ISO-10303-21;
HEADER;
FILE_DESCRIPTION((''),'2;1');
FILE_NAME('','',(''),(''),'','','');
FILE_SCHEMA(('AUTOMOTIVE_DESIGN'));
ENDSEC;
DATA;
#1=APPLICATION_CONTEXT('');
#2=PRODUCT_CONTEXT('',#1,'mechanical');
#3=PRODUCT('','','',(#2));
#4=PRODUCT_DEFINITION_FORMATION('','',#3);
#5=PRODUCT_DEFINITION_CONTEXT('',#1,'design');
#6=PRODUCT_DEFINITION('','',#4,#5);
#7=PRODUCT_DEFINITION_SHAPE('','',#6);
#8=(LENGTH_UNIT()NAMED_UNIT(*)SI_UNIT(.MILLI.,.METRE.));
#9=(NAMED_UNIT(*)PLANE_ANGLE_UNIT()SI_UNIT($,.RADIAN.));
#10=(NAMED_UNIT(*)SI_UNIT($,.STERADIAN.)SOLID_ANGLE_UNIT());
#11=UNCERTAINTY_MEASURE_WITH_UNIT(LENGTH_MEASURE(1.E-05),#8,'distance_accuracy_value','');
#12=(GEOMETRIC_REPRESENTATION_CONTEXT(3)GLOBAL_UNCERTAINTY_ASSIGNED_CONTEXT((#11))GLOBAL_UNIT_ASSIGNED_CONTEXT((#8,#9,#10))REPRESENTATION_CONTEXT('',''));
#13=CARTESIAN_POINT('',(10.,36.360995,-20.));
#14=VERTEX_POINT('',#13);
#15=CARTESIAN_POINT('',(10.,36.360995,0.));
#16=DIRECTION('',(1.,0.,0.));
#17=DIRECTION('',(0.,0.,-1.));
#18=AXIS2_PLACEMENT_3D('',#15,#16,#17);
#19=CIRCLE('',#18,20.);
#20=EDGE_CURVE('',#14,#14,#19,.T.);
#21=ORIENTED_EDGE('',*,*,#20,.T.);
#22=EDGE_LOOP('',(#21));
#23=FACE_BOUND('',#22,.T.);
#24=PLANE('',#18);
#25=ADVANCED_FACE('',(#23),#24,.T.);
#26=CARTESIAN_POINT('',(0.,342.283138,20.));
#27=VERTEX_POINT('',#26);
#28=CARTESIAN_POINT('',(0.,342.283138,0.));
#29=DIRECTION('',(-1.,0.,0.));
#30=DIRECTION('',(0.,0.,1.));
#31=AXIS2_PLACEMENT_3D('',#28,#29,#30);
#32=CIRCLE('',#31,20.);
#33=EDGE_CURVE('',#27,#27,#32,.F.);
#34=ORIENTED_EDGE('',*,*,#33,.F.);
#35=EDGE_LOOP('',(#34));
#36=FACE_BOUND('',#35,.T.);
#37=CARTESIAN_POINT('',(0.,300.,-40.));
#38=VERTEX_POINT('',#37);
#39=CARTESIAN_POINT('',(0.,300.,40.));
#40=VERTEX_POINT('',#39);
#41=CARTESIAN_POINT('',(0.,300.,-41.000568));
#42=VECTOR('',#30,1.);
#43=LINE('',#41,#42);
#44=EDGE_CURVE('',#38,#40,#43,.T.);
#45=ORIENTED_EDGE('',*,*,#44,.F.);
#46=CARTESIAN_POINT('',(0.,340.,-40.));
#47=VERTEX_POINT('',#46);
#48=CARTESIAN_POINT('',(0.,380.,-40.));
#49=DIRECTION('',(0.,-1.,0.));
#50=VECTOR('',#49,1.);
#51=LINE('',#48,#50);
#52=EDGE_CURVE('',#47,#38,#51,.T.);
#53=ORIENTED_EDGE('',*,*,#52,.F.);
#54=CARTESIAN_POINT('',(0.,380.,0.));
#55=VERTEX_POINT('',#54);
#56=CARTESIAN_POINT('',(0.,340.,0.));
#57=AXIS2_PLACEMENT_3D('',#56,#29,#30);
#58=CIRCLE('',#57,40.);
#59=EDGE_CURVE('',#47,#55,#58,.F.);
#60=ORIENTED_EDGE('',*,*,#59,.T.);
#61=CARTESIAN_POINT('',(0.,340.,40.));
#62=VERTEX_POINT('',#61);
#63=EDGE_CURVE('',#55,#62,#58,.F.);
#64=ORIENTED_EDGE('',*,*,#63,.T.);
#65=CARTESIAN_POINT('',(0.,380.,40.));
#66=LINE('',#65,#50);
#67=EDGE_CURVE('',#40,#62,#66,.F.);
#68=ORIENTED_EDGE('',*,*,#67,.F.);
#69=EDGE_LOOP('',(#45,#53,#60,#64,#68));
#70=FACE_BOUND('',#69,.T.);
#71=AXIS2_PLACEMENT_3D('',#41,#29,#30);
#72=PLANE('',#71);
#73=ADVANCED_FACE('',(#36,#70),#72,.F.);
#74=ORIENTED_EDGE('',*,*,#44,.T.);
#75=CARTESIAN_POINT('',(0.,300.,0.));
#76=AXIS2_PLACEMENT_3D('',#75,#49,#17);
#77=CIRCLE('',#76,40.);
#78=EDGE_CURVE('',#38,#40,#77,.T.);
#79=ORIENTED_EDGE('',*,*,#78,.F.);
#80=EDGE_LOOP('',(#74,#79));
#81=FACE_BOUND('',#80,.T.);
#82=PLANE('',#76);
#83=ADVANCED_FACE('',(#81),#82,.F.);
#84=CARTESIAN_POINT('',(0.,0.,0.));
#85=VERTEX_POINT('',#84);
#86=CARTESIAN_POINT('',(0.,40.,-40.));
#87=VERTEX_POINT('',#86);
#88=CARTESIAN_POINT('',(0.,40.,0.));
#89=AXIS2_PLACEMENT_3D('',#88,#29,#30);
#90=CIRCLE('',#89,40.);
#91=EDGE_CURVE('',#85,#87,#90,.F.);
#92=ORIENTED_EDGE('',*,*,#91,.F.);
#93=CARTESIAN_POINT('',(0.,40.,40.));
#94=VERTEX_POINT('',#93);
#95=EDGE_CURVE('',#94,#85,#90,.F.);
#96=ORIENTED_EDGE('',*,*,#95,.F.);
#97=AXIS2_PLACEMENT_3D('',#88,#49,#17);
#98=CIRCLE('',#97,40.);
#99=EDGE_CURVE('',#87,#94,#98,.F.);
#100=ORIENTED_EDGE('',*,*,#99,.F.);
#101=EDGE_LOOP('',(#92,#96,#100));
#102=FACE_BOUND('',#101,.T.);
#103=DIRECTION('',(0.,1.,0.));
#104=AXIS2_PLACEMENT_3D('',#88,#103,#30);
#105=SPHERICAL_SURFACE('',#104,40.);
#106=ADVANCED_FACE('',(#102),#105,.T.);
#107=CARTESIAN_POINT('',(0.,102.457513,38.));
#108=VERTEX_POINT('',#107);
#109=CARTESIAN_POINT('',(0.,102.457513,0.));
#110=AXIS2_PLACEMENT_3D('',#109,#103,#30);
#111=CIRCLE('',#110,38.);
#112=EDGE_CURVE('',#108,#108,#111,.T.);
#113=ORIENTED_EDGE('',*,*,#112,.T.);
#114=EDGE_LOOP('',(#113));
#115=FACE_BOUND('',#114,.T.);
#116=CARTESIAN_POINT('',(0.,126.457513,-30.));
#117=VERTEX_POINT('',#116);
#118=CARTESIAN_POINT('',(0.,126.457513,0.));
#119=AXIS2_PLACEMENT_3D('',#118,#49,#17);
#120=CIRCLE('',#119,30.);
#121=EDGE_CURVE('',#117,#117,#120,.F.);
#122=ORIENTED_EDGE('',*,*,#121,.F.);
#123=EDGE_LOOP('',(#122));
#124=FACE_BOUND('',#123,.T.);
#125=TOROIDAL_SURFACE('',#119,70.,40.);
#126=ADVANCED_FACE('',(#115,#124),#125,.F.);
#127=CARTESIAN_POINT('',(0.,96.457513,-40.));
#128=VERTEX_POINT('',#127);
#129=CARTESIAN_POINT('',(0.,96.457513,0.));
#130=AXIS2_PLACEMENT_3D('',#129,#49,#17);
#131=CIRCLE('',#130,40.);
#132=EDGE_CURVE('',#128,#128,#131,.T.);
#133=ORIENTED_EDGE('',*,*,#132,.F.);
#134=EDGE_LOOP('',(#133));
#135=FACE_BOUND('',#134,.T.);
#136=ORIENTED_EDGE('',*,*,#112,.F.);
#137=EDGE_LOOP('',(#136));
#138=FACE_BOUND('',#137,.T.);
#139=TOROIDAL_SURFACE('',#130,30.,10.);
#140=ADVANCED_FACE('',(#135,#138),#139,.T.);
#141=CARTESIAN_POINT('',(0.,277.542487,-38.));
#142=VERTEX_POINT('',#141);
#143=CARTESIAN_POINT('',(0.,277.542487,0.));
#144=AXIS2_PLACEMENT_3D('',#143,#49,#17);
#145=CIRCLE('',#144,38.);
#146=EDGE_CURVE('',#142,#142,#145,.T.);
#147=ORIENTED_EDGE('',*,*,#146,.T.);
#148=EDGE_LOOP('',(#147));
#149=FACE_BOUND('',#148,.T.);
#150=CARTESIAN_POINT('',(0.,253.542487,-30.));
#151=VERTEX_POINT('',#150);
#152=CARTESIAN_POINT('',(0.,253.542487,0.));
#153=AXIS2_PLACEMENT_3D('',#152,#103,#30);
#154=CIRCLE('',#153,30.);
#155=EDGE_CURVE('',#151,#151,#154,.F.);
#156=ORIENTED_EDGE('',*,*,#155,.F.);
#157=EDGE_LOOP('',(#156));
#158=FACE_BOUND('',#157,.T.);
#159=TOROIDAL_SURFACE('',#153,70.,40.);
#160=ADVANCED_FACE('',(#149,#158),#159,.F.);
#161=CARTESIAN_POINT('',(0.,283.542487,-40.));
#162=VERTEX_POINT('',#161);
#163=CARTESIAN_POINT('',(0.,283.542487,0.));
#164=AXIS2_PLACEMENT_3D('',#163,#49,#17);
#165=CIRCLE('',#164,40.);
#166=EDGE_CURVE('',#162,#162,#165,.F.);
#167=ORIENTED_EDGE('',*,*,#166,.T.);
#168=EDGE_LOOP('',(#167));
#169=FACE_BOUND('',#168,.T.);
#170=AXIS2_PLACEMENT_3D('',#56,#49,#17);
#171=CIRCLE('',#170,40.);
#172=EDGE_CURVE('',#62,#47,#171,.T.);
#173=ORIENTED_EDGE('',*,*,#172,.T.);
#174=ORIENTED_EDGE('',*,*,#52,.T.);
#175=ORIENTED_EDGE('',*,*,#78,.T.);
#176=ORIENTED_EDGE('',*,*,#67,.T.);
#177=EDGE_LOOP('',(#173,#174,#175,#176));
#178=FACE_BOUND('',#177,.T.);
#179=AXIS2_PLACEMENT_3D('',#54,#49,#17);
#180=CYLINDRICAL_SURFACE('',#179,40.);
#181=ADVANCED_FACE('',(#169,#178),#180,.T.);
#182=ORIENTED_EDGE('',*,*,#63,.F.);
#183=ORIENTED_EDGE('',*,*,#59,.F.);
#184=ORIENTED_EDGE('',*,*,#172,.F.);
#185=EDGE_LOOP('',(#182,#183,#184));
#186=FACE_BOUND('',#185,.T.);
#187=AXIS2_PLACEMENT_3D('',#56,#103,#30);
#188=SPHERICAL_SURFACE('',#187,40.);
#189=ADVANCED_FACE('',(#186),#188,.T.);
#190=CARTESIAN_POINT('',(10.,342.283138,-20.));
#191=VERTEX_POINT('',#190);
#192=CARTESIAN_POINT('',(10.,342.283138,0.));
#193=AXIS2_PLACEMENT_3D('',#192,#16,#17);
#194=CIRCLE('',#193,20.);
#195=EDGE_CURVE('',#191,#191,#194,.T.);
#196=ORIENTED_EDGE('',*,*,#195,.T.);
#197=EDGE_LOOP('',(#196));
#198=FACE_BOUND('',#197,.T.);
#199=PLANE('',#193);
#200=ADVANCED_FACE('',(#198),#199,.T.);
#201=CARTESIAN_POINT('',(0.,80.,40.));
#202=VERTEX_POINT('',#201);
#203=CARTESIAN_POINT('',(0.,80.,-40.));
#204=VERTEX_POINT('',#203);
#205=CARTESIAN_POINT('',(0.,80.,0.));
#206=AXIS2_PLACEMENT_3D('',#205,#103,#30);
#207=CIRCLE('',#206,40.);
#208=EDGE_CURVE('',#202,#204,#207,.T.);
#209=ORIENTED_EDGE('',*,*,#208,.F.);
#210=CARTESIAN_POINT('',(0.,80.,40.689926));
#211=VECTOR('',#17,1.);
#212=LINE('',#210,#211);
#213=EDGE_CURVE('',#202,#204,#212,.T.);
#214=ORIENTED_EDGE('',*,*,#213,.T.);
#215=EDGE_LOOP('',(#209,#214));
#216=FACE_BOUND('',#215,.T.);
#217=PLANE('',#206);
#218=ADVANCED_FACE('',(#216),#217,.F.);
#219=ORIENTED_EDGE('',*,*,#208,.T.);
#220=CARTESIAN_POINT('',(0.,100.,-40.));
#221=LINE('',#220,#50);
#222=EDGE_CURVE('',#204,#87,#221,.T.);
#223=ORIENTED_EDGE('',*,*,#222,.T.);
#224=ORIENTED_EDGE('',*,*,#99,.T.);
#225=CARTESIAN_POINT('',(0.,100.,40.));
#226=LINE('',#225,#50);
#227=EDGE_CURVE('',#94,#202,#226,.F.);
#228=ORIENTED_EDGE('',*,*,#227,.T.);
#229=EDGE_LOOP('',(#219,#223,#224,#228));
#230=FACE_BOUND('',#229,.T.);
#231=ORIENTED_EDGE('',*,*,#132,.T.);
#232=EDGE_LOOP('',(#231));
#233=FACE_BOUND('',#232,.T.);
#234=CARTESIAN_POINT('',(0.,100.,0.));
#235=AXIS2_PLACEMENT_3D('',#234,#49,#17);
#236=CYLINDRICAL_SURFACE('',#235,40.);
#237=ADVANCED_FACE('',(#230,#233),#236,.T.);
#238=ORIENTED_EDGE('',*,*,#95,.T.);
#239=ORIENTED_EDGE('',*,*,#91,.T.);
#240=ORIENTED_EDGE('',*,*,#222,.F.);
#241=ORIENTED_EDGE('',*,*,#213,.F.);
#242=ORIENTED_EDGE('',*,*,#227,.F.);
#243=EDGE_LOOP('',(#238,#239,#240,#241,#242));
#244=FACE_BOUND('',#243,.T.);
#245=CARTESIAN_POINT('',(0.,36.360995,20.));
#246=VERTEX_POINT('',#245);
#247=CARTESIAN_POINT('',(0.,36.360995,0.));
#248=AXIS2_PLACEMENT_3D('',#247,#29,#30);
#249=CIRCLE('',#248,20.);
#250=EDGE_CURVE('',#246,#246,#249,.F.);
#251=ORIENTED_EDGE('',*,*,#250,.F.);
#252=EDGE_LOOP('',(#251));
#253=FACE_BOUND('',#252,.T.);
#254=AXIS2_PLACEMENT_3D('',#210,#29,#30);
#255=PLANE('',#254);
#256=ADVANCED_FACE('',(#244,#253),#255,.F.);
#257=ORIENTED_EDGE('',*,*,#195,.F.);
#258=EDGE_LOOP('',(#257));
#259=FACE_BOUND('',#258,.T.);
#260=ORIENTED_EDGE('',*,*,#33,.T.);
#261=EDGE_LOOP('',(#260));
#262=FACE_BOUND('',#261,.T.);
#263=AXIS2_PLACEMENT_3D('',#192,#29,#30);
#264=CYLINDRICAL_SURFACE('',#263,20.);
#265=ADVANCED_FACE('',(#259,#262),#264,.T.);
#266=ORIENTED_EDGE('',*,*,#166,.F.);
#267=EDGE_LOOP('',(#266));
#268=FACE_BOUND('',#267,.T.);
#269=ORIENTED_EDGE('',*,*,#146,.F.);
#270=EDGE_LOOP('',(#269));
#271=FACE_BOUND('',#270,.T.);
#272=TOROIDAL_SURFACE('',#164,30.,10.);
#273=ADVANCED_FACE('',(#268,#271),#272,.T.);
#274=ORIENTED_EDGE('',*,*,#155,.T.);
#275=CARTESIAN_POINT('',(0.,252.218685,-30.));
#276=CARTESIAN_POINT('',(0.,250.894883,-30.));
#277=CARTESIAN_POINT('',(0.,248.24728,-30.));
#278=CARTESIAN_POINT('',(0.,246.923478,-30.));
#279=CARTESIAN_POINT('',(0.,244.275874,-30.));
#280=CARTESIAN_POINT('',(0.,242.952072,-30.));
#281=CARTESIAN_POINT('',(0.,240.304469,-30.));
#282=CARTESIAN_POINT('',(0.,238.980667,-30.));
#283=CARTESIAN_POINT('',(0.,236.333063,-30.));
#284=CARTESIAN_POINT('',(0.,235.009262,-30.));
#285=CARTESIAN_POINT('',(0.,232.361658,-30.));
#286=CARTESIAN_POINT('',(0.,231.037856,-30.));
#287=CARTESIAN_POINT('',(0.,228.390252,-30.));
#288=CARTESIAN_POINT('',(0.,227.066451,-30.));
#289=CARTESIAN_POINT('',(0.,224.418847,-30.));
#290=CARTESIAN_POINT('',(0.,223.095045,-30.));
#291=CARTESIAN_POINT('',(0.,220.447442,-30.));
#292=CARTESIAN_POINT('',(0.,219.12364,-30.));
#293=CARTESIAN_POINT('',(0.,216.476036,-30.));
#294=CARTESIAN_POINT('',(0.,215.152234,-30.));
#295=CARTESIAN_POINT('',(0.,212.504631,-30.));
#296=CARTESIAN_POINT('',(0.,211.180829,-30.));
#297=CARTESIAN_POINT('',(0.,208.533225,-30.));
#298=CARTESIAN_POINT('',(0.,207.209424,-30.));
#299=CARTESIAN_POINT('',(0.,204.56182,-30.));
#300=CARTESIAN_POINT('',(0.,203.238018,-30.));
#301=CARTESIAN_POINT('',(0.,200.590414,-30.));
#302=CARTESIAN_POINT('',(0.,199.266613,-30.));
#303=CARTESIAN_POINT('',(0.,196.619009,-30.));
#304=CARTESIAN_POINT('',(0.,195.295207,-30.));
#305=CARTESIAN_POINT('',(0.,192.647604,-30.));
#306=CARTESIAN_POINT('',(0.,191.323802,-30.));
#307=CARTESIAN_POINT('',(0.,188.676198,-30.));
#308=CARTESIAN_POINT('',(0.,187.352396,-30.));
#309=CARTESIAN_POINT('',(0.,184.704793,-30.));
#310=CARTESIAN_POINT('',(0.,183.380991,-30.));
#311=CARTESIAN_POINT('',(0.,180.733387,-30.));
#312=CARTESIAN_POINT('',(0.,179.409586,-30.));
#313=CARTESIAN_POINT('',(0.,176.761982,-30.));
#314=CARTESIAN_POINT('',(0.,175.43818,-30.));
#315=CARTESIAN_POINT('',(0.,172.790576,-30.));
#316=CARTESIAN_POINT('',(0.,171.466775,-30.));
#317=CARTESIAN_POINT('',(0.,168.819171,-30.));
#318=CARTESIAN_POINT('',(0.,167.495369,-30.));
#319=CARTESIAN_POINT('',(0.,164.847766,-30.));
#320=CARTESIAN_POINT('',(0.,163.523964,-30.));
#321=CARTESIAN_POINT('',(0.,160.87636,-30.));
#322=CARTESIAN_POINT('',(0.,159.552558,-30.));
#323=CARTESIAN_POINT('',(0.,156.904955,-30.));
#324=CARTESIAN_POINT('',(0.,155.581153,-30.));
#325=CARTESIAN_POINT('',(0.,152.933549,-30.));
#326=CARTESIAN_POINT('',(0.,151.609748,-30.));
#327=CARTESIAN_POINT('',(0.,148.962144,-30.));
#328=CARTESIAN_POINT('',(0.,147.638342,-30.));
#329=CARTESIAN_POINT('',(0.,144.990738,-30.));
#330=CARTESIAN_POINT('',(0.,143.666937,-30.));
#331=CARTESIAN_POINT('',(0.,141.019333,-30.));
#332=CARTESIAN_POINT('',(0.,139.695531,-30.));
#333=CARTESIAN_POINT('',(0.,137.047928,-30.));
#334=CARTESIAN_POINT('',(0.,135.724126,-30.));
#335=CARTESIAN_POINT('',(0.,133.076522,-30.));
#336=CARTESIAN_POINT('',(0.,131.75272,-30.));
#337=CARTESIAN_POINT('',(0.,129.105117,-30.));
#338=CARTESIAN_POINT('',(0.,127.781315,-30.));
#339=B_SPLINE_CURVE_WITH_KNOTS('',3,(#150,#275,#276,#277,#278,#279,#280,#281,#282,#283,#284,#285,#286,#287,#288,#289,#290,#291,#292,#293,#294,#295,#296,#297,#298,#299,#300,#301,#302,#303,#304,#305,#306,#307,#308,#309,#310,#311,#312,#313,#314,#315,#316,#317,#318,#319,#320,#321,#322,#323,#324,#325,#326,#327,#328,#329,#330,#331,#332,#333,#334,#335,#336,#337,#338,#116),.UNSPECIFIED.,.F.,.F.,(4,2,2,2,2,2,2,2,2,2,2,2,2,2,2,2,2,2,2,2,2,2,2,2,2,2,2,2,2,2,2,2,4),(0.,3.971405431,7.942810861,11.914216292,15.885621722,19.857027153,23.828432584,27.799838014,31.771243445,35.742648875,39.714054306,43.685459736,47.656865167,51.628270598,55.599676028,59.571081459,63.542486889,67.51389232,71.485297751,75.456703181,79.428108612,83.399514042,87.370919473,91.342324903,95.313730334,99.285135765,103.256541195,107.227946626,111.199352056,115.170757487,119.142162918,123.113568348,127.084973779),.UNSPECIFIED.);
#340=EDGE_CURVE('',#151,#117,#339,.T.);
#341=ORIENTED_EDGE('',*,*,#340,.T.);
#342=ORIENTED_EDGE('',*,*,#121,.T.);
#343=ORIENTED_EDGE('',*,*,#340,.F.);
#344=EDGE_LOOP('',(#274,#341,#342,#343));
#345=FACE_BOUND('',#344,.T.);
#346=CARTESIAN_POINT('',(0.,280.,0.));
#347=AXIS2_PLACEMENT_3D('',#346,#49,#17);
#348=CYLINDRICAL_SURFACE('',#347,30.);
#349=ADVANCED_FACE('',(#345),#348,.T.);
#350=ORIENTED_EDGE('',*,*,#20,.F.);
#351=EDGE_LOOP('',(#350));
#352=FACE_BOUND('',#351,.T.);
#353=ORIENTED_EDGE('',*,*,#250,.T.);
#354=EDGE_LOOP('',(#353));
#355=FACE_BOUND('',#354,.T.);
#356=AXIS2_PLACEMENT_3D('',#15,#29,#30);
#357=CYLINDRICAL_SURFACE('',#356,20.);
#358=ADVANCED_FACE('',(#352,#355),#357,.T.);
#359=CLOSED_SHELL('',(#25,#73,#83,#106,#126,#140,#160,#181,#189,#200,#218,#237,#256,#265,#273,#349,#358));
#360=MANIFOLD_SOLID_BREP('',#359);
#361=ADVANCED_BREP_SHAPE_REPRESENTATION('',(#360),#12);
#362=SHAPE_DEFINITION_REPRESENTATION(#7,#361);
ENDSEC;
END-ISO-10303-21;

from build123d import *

# Parameters (mm, degrees)
SKETCH1_R           = 40
BOSS_EXTRUDE1_DEPTH = 100
SKETCH3_R           = 30
BOSS_EXTRUDE2_DEPTH = 180
SKETCH4_R           = 40
BOSS_EXTRUDE3_DEPTH = 100
SKETCH5_W           = 41.242816752
SKETCH5_H           = 81.516639277
CUT_EXTRUDE1_DEPTH  = 80
SKETCH6_W           = 41.962077935
SKETCH6_H           = 81.514478353
CUT_EXTRUDE2_DEPTH  = 80
FILLET3_R           = 40
FILLET4_R           = 40
SKETCH7_R           = 20
BOSS_EXTRUDE4_DEPTH = 10
SKETCH8_R           = 20
BOSS_EXTRUDE5_DEPTH = 10
FILLET5_R           = 40
FILLET6_R           = 40
FILLET7_R           = 10
FILLET8_R           = 10


# Some blends are built 0.0001 mm under size
with BuildPart() as part:
    # Sketch1 → Boss-Extrude1 (new body)
    with BuildSketch(Plane(origin=(0, 0, 0), x_dir=(1, 0, 0), z_dir=(0, 1, 0))):
        with Locations(Location((0, 0, 0), (0, 0, 270))):
            Circle(SKETCH1_R)
    extrude(amount=BOSS_EXTRUDE1_DEPTH)

    # Sketch3 → Boss-Extrude2 (add)
    with BuildSketch(Plane(origin=(0, 100, 0), x_dir=(1, 0, 0), z_dir=(0, 1, 0))):
        with Locations(Location((0, 0, 0), (0, 0, 90))):
            Circle(SKETCH3_R)
    extrude(amount=BOSS_EXTRUDE2_DEPTH)

    # Sketch4 → Boss-Extrude3 (add)
    with BuildSketch(Plane(origin=(0, 280, 0), x_dir=(1, 0, 0), z_dir=(0, 1, 0))):
        with Locations(Location((0, 0, 0), (0, 0, 270))):
            Circle(SKETCH4_R)
    extrude(amount=BOSS_EXTRUDE3_DEPTH)

    # Sketch5 → Cut-Extrude1 (cut)
    with BuildSketch(Plane(origin=(0, 380, 0), x_dir=(1, 0, 0), z_dir=(0, 1, 0))):
        with Locations((20.621408376, 0.242248556)):
            Rectangle(SKETCH5_W, SKETCH5_H)
    extrude(amount=-CUT_EXTRUDE1_DEPTH, mode=Mode.SUBTRACT)

    # Sketch6 → Cut-Extrude2 (cut)
    with BuildSketch(Plane.XZ):
        with Locations((20.981038968, -0.067313451)):
            Rectangle(SKETCH6_W, SKETCH6_H)
    extrude(amount=-CUT_EXTRUDE2_DEPTH, mode=Mode.SUBTRACT)

    # Fillet3
    fillet3_edges = [part.edges().sort_by_distance(p)[0] for p in [
        (-40, 0, 0),
    ]]
    fillet(fillet3_edges, radius=FILLET3_R - 0.0001)  # a hair under: the kernel refuses the full size

    # Fillet4
    fillet4_edges = [part.edges().sort_by_distance(p)[0] for p in [
        (-40, 380, 0),
    ]]
    fillet(fillet4_edges, radius=FILLET4_R - 0.0001)  # a hair under: the kernel refuses the full size

    # Sketch7 → Boss-Extrude4 (add)
    with BuildSketch(Plane(origin=(0, 0, 0), x_dir=(0, 0, -1), z_dir=(1, 0, 0))):
        with Locations(Location((0, 36.360995044, 0), (0, 0, 180))):
            Circle(SKETCH7_R)
    extrude(amount=BOSS_EXTRUDE4_DEPTH)

    # Sketch8 → Boss-Extrude5 (add)
    with BuildSketch(Plane(origin=(0, 0, 0), x_dir=(0, 0, -1), z_dir=(1, 0, 0))):
        with Locations(Location((0, 342.283138074, 0), (0, 0, 180))):
            Circle(SKETCH8_R)
    extrude(amount=BOSS_EXTRUDE5_DEPTH)

    # Fillet5
    # the kernel refuses this fillet: 40 mm, written as the material it adds along each edge
    with BuildSketch(Plane(origin=(0, 100, 0), x_dir=(0, 0, -1), z_dir=(1, 0, 0))) as fillet5_piece_1:
        with BuildLine():
            CenterArc((70, 26.457513111), FILLET5_R, 180, 41.409622109)
            Line((40, 0), (39.4, -0.529150262))
            ThreePointArc((39.4, -0.529150262), (35, -0.8), (30, -0.8))
            Line((30, -0.8), (29.2, 0))
            Line((29.2, 0), (29.2, 26.457513111))
            Line((29.2, 26.457513111), (30, 26.457513111))
        make_face()
    revolve(axis=Axis((0, 100, 0), (0, 1, 0)))

    # Fillet6
    # the kernel refuses this fillet: 40 mm, written as the material it adds along each edge
    with BuildSketch(Plane(origin=(0, 280, 0), x_dir=(0, 0, -1), z_dir=(1, 0, 0))) as fillet6_piece_1:
        with BuildLine():
            CenterArc((70, -26.457513111), FILLET6_R, 138.590377891, 41.409622109)
            Line((40, 0), (39.4, 0.529150262))
            ThreePointArc((39.4, 0.529150262), (35, 0.8), (30, 0.8))
            Line((30, 0.8), (29.2, 0))
            Line((29.2, 0), (29.2, -26.457513111))
            Line((29.2, -26.457513111), (30, -26.457513111))
        make_face()
    revolve(axis=Axis((0, 280, 0), (0, 1, 0)))

    # Fillet7
    fillet7_edges = [part.edges().sort_by_distance(p)[0] for p in [
        (40, 280, 0),
    ]]
    fillet(fillet7_edges, radius=FILLET7_R)

    # Fillet8
    fillet8_edges = [part.edges().sort_by_distance(p)[0] for p in [
        (-40, 100, 0),
    ]]
    fillet(fillet8_edges, radius=FILLET8_R)


solid = part.part
